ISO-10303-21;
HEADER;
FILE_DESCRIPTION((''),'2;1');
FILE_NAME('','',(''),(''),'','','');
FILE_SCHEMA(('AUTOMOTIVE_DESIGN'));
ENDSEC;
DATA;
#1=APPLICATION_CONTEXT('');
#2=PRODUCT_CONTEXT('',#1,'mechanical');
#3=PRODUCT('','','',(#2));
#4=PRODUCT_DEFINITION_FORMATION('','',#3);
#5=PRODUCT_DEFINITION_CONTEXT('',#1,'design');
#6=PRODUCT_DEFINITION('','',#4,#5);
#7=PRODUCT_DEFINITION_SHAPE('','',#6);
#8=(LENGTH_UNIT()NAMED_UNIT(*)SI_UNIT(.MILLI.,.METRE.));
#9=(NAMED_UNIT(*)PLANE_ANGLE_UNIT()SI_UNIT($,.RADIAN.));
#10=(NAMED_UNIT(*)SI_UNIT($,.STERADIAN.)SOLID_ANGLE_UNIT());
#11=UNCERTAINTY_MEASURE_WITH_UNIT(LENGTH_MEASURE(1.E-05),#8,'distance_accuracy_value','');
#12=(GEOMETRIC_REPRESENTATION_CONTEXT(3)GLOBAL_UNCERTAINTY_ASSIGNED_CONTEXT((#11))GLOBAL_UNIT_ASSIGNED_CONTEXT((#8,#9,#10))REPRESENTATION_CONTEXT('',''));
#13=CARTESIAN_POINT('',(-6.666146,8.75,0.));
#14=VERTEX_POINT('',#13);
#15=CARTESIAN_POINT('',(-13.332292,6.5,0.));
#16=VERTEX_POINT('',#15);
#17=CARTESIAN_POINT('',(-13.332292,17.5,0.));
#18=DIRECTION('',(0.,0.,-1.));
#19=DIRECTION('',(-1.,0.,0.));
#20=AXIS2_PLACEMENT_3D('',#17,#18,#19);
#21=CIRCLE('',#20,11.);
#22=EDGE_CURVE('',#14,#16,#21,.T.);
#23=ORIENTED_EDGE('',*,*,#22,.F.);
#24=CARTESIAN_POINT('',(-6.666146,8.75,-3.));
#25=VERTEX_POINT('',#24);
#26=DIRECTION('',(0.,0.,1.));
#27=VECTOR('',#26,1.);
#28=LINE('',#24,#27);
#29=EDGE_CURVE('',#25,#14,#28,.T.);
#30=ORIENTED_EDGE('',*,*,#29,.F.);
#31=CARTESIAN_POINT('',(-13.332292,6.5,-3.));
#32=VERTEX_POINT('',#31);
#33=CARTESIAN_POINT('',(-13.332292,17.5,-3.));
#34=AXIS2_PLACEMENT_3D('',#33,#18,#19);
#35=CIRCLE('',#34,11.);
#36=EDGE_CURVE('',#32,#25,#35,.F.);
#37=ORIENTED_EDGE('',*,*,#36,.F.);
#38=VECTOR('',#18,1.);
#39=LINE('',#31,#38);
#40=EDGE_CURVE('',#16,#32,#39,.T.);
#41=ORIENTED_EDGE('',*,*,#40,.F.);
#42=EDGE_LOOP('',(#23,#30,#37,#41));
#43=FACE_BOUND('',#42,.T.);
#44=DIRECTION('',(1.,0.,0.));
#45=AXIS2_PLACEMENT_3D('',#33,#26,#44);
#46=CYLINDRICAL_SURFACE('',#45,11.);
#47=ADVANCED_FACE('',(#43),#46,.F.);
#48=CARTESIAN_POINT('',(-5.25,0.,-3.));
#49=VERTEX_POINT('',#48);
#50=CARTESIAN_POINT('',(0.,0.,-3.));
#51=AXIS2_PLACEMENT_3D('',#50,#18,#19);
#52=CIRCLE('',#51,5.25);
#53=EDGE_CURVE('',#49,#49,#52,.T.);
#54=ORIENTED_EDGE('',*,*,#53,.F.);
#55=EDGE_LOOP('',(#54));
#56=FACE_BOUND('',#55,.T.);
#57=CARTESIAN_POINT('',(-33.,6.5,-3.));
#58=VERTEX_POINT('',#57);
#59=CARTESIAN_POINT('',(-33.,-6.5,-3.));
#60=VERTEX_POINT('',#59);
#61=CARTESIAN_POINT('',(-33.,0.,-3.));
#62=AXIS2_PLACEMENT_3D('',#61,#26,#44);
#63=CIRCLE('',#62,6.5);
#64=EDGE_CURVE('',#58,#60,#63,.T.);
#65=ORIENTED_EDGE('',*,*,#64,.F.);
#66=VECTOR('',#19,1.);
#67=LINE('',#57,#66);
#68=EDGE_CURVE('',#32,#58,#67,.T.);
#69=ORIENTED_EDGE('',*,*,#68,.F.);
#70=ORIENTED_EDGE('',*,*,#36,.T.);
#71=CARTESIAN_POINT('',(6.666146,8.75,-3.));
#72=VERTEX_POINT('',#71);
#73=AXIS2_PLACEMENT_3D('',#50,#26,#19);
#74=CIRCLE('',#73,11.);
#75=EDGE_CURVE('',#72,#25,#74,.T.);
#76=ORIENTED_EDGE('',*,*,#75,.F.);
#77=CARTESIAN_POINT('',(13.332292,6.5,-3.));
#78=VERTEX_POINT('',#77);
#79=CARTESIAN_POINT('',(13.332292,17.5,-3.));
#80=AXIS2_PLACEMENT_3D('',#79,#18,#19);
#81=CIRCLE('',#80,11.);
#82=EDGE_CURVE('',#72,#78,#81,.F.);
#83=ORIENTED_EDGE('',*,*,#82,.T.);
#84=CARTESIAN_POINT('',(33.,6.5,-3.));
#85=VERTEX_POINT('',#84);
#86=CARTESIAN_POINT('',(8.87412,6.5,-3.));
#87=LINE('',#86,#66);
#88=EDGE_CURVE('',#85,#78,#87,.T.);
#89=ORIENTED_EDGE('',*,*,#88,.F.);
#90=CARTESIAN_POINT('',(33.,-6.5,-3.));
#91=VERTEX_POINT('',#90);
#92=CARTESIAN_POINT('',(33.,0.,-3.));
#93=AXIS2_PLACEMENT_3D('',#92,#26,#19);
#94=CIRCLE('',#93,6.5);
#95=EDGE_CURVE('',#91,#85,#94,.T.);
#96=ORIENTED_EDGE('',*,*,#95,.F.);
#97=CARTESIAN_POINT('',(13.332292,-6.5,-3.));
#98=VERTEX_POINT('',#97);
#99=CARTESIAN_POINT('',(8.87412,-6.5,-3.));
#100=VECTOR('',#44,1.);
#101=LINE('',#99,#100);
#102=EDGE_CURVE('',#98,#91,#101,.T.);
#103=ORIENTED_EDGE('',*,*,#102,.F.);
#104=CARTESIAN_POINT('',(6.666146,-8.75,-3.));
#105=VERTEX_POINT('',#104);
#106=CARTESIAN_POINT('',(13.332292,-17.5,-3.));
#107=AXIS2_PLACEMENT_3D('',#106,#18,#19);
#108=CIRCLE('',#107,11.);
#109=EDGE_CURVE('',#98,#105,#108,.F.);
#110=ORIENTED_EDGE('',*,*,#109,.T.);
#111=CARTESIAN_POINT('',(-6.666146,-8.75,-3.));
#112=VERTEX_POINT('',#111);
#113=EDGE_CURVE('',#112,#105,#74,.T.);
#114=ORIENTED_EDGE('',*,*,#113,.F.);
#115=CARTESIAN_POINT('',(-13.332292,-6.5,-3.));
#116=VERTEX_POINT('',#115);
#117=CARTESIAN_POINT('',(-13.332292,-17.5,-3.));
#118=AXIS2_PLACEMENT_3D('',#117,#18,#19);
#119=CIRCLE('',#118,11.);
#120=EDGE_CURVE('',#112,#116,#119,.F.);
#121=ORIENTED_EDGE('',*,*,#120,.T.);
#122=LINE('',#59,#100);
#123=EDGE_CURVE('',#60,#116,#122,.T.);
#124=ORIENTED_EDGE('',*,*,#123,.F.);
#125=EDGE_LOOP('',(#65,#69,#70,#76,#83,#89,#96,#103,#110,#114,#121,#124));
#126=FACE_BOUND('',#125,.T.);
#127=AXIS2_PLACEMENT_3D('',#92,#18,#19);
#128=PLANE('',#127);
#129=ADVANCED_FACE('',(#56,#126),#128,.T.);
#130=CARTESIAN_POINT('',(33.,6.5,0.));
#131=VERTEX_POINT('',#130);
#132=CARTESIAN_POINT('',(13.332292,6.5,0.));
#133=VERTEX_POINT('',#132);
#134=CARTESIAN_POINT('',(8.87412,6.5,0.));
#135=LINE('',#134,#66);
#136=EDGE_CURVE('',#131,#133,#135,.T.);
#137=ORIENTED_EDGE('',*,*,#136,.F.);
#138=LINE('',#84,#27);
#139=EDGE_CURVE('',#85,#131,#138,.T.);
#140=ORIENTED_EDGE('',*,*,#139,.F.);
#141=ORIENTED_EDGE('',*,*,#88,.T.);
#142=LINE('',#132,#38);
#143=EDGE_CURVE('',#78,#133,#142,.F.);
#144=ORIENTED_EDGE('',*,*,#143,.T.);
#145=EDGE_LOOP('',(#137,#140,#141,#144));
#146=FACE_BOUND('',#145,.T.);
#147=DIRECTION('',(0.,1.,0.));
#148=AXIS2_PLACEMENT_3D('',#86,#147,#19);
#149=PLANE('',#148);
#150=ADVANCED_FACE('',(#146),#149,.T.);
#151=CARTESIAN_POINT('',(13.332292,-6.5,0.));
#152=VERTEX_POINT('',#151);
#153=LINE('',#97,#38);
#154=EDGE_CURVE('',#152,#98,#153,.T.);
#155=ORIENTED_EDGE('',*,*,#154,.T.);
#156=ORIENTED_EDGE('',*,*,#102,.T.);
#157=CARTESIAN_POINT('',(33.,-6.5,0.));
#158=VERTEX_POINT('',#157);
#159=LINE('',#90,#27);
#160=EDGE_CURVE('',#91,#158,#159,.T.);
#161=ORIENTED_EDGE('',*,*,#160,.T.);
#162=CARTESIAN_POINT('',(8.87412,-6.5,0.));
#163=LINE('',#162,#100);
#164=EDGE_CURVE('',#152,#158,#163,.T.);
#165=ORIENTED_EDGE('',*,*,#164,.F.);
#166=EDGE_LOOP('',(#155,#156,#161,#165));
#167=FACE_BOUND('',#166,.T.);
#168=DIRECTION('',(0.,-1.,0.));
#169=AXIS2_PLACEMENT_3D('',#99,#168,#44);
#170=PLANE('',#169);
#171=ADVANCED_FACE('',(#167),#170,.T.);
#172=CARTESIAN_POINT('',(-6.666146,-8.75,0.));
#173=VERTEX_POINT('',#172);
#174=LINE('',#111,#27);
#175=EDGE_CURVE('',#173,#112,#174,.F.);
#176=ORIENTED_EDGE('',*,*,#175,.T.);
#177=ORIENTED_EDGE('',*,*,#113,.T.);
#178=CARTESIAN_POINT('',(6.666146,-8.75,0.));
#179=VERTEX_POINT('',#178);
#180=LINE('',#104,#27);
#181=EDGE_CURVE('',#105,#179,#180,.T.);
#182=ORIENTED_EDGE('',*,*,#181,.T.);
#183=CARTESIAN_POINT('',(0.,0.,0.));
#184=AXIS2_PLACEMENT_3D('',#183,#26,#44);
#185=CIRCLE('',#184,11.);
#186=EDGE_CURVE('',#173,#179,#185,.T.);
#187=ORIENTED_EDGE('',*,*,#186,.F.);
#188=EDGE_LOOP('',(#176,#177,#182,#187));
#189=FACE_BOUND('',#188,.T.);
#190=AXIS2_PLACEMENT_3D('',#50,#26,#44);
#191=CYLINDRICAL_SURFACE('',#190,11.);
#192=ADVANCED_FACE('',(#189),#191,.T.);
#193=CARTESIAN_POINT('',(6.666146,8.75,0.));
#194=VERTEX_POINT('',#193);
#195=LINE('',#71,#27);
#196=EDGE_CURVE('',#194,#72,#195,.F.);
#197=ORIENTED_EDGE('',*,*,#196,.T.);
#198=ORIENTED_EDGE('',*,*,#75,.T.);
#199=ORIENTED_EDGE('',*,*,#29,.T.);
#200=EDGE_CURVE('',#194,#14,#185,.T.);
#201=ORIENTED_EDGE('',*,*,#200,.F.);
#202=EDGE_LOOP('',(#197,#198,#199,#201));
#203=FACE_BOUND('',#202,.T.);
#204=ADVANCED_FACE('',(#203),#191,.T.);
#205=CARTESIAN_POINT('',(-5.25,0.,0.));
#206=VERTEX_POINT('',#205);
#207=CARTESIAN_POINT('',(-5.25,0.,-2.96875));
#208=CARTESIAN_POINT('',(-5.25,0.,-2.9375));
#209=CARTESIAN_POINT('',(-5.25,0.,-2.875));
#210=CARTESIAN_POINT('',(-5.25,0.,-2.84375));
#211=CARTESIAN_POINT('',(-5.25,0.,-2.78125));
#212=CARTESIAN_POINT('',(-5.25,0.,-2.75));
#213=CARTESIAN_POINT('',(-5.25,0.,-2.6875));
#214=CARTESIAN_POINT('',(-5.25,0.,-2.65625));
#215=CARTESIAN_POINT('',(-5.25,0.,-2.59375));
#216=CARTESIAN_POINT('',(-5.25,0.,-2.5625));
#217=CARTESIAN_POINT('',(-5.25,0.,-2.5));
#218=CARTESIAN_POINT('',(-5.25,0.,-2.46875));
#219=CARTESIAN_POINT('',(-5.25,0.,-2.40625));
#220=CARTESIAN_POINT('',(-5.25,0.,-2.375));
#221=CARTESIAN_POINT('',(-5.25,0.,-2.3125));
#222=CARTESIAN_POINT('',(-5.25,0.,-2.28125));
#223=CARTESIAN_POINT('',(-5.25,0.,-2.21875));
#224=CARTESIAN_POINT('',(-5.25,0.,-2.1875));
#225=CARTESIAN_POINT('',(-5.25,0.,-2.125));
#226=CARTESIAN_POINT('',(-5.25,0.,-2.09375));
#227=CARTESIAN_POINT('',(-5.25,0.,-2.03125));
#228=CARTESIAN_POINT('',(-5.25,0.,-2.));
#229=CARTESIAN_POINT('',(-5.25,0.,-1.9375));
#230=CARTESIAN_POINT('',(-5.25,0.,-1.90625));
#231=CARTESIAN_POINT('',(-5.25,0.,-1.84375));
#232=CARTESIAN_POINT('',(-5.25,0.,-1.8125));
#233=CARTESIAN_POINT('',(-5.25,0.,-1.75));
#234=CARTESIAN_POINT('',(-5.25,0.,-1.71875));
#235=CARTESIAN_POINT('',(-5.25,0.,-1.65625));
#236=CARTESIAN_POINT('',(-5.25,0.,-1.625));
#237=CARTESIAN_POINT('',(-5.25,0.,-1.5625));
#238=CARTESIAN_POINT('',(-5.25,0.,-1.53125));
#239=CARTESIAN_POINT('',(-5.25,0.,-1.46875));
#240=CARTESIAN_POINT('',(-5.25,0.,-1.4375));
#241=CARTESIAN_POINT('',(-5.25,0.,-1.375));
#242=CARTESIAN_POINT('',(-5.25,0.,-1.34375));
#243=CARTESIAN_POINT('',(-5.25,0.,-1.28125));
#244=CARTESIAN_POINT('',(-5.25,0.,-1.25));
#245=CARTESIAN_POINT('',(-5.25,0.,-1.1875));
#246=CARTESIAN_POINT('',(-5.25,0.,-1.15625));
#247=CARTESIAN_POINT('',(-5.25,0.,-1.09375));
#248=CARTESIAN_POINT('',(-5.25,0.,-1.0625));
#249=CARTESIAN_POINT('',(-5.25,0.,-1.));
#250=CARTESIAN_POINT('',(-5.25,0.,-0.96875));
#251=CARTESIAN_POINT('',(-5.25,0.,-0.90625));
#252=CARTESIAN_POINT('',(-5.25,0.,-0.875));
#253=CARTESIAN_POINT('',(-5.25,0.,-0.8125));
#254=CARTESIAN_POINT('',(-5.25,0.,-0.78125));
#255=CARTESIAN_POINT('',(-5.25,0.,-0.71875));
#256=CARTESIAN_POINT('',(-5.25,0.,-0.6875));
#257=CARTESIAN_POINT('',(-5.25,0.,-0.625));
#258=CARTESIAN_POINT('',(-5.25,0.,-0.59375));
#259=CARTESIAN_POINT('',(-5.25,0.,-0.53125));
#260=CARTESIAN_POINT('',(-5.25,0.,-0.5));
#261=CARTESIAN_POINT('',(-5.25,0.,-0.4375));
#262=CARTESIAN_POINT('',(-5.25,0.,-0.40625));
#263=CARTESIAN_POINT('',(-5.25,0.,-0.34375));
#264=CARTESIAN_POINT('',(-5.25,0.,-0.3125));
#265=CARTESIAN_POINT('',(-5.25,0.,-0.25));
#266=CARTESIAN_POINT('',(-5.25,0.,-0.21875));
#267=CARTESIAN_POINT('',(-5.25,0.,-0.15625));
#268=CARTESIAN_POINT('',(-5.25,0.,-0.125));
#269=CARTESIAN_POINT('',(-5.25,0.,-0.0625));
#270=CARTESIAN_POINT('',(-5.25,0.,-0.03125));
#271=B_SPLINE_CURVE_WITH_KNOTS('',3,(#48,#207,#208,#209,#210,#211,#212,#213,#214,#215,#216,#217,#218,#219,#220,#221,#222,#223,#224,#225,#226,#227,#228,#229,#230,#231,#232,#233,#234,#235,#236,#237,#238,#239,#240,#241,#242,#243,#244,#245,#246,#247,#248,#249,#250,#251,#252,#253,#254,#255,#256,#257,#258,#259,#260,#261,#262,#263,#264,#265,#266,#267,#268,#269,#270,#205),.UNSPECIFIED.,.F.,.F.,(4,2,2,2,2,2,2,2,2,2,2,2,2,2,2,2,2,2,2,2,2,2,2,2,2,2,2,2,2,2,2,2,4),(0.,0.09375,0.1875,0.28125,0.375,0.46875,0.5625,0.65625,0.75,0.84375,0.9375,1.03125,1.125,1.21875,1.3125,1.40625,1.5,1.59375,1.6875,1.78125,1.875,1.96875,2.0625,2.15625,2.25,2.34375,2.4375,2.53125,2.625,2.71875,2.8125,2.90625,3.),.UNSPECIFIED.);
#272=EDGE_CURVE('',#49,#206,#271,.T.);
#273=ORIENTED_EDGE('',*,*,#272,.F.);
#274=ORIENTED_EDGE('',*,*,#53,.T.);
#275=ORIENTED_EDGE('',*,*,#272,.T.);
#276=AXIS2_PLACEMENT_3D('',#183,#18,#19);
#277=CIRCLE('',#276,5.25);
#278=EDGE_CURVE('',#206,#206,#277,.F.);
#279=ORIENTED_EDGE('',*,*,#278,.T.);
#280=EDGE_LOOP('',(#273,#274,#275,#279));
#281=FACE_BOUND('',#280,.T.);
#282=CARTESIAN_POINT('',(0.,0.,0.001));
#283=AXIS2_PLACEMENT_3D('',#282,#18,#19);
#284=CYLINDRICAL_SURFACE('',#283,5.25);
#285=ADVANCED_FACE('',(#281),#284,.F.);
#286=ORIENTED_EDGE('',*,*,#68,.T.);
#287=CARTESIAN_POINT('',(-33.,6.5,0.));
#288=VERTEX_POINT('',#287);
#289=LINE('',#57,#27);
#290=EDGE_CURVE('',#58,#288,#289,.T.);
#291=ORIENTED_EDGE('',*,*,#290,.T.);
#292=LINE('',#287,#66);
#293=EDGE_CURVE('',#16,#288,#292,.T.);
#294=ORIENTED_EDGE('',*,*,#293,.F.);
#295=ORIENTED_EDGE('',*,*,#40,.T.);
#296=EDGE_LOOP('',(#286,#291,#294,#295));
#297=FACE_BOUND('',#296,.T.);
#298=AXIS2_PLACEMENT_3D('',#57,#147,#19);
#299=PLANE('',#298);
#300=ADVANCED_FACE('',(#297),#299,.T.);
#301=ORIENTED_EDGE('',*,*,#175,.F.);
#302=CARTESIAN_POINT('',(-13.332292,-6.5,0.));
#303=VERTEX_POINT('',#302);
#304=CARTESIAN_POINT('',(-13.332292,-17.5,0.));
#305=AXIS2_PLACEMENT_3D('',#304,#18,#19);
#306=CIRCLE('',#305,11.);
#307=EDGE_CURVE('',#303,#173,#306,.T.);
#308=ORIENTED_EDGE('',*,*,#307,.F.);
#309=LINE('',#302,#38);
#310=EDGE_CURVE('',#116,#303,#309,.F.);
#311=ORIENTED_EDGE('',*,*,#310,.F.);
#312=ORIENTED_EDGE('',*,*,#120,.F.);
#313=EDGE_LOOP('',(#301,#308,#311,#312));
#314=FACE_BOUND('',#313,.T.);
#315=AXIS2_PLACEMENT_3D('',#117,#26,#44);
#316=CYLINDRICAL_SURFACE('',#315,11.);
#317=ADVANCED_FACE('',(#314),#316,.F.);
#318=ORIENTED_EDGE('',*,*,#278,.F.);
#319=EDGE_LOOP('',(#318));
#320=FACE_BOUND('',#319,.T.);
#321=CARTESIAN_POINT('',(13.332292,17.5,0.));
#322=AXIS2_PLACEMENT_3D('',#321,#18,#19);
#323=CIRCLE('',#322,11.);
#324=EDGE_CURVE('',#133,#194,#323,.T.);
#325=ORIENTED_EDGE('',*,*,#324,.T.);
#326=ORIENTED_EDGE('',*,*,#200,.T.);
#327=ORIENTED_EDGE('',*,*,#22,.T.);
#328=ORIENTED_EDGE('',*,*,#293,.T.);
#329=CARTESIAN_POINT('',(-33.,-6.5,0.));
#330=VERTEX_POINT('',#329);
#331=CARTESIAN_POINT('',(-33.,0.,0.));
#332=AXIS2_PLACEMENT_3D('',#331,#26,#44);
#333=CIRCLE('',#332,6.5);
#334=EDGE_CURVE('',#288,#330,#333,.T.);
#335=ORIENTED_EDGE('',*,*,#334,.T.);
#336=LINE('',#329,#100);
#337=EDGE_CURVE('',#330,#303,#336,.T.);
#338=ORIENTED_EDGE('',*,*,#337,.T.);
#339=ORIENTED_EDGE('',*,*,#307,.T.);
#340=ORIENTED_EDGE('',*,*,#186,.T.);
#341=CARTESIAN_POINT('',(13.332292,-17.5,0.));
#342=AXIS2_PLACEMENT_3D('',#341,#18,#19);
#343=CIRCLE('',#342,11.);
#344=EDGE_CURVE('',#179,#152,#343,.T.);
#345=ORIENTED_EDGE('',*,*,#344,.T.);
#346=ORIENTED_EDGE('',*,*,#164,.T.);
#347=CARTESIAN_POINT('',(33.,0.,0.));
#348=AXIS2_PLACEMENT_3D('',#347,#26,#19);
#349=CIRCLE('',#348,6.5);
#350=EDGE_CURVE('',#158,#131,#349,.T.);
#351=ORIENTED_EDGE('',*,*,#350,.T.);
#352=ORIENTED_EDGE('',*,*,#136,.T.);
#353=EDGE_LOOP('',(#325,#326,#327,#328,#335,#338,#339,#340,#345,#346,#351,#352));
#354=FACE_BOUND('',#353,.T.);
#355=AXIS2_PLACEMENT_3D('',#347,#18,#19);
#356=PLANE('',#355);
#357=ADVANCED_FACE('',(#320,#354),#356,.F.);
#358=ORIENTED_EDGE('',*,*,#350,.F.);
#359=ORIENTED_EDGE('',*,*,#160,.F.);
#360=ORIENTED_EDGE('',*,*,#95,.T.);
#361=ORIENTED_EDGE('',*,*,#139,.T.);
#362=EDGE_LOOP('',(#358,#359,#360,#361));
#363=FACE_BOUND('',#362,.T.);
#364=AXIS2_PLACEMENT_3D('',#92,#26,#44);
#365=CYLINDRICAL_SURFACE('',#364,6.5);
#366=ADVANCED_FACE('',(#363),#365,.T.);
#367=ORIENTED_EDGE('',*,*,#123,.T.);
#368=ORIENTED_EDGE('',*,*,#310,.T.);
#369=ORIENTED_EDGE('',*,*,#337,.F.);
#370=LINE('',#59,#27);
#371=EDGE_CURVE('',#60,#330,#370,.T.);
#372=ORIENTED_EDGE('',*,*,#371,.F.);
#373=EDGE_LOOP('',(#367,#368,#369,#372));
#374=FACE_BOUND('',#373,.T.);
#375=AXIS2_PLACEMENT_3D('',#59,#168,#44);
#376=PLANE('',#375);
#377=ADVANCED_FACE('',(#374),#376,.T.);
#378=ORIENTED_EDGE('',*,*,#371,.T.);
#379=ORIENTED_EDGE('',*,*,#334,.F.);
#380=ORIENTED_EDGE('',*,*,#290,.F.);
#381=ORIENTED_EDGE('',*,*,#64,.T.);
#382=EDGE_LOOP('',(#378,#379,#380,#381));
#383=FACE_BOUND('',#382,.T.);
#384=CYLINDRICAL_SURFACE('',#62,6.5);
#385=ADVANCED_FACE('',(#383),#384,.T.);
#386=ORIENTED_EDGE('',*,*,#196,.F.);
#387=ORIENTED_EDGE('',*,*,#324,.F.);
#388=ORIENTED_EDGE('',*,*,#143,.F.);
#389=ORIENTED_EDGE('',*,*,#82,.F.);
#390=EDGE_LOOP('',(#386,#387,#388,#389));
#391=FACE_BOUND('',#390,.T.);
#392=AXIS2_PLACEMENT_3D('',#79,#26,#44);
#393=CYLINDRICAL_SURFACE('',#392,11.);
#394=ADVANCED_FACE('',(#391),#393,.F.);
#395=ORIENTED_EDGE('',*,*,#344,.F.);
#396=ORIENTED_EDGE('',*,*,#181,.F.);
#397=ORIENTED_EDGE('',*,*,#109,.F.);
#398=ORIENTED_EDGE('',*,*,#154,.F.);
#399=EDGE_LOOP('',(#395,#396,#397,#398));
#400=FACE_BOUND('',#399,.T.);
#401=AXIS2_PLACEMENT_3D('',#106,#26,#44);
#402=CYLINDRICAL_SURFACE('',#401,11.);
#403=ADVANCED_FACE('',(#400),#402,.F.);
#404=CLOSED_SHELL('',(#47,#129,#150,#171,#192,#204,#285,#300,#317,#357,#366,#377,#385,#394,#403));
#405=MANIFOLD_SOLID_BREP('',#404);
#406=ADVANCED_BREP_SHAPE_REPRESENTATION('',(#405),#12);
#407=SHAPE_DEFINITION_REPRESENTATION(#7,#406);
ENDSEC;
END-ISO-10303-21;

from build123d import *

# Parameters (mm, degrees)
FLANGE_BASE1_DEPTH    = 3
FILETE1_R             = 11
FILETE2_R             = 11
CORTE_EXTRUS_O1_REACH = 43.113
ESBO_O2_R             = 5.25


# Sheet-metal steps are written as plain solids
with BuildPart() as part:
    # Esboço1 → Flange-base1 (new body)
    with BuildSketch(Plane.XY):
        with BuildLine():
            Line((-33, 6.5), (-8.874119675, 6.5))
            ThreePointArc((-8.874119675, 6.5), (-4.974937186, 9.810708435), (0, 11))
            ThreePointArc((0, 11), (4.974937186, 9.810708435), (8.874119675, 6.5))
            Line((8.874119675, 6.5), (33, 6.5))
            ThreePointArc((33, 6.5), (39.5, 0), (33, -6.5))
            Line((33, -6.5), (8.874119675, -6.5))
            ThreePointArc((8.874119675, -6.5), (4.974937186, -9.810708435), (0, -11))
            ThreePointArc((0, -11), (-4.974937186, -9.810708435), (-8.874119675, -6.5))
            Line((-8.874119675, -6.5), (-33, -6.5))
            ThreePointArc((-33, -6.5), (-39.5, 0), (-33, 6.5))
        make_face()
    extrude(amount=-FLANGE_BASE1_DEPTH)

    # Filete1
    filete1_edges = [part.edges().sort_by_distance(p)[0] for p in [
        (-8.874119675, 6.5, -1.5),
    ]]
    fillet(filete1_edges, radius=FILETE1_R)

    # Filete2
    filete2_edges = [part.edges().sort_by_distance(p)[0] for p in [
        (8.874119675, -6.5, -1.5),
        (-8.874119675, -6.5, -1.5),
        (8.874119675, 6.5, -1.5),
    ]]
    fillet(filete2_edges, radius=FILETE2_R)

    # Esboço2 → Corte-extrusão1 (cut, up to next)
    with BuildSketch(Plane(origin=(0, 0, -3), x_dir=(-1, 0, 0), z_dir=(0, 0, -1)), mode=Mode.PRIVATE) as corte_extrus_o1_sk1:
        Circle(ESBO_O2_R)
    corte_extrus_o1_tool1 = extrude(corte_extrus_o1_sk1.sketch, amount=-CORTE_EXTRUS_O1_REACH, mode=Mode.PRIVATE) & part.part
    add(corte_extrus_o1_tool1.solids().sort_by_distance((0, 0, -3))[0], mode=Mode.SUBTRACT)


solid = part.part
